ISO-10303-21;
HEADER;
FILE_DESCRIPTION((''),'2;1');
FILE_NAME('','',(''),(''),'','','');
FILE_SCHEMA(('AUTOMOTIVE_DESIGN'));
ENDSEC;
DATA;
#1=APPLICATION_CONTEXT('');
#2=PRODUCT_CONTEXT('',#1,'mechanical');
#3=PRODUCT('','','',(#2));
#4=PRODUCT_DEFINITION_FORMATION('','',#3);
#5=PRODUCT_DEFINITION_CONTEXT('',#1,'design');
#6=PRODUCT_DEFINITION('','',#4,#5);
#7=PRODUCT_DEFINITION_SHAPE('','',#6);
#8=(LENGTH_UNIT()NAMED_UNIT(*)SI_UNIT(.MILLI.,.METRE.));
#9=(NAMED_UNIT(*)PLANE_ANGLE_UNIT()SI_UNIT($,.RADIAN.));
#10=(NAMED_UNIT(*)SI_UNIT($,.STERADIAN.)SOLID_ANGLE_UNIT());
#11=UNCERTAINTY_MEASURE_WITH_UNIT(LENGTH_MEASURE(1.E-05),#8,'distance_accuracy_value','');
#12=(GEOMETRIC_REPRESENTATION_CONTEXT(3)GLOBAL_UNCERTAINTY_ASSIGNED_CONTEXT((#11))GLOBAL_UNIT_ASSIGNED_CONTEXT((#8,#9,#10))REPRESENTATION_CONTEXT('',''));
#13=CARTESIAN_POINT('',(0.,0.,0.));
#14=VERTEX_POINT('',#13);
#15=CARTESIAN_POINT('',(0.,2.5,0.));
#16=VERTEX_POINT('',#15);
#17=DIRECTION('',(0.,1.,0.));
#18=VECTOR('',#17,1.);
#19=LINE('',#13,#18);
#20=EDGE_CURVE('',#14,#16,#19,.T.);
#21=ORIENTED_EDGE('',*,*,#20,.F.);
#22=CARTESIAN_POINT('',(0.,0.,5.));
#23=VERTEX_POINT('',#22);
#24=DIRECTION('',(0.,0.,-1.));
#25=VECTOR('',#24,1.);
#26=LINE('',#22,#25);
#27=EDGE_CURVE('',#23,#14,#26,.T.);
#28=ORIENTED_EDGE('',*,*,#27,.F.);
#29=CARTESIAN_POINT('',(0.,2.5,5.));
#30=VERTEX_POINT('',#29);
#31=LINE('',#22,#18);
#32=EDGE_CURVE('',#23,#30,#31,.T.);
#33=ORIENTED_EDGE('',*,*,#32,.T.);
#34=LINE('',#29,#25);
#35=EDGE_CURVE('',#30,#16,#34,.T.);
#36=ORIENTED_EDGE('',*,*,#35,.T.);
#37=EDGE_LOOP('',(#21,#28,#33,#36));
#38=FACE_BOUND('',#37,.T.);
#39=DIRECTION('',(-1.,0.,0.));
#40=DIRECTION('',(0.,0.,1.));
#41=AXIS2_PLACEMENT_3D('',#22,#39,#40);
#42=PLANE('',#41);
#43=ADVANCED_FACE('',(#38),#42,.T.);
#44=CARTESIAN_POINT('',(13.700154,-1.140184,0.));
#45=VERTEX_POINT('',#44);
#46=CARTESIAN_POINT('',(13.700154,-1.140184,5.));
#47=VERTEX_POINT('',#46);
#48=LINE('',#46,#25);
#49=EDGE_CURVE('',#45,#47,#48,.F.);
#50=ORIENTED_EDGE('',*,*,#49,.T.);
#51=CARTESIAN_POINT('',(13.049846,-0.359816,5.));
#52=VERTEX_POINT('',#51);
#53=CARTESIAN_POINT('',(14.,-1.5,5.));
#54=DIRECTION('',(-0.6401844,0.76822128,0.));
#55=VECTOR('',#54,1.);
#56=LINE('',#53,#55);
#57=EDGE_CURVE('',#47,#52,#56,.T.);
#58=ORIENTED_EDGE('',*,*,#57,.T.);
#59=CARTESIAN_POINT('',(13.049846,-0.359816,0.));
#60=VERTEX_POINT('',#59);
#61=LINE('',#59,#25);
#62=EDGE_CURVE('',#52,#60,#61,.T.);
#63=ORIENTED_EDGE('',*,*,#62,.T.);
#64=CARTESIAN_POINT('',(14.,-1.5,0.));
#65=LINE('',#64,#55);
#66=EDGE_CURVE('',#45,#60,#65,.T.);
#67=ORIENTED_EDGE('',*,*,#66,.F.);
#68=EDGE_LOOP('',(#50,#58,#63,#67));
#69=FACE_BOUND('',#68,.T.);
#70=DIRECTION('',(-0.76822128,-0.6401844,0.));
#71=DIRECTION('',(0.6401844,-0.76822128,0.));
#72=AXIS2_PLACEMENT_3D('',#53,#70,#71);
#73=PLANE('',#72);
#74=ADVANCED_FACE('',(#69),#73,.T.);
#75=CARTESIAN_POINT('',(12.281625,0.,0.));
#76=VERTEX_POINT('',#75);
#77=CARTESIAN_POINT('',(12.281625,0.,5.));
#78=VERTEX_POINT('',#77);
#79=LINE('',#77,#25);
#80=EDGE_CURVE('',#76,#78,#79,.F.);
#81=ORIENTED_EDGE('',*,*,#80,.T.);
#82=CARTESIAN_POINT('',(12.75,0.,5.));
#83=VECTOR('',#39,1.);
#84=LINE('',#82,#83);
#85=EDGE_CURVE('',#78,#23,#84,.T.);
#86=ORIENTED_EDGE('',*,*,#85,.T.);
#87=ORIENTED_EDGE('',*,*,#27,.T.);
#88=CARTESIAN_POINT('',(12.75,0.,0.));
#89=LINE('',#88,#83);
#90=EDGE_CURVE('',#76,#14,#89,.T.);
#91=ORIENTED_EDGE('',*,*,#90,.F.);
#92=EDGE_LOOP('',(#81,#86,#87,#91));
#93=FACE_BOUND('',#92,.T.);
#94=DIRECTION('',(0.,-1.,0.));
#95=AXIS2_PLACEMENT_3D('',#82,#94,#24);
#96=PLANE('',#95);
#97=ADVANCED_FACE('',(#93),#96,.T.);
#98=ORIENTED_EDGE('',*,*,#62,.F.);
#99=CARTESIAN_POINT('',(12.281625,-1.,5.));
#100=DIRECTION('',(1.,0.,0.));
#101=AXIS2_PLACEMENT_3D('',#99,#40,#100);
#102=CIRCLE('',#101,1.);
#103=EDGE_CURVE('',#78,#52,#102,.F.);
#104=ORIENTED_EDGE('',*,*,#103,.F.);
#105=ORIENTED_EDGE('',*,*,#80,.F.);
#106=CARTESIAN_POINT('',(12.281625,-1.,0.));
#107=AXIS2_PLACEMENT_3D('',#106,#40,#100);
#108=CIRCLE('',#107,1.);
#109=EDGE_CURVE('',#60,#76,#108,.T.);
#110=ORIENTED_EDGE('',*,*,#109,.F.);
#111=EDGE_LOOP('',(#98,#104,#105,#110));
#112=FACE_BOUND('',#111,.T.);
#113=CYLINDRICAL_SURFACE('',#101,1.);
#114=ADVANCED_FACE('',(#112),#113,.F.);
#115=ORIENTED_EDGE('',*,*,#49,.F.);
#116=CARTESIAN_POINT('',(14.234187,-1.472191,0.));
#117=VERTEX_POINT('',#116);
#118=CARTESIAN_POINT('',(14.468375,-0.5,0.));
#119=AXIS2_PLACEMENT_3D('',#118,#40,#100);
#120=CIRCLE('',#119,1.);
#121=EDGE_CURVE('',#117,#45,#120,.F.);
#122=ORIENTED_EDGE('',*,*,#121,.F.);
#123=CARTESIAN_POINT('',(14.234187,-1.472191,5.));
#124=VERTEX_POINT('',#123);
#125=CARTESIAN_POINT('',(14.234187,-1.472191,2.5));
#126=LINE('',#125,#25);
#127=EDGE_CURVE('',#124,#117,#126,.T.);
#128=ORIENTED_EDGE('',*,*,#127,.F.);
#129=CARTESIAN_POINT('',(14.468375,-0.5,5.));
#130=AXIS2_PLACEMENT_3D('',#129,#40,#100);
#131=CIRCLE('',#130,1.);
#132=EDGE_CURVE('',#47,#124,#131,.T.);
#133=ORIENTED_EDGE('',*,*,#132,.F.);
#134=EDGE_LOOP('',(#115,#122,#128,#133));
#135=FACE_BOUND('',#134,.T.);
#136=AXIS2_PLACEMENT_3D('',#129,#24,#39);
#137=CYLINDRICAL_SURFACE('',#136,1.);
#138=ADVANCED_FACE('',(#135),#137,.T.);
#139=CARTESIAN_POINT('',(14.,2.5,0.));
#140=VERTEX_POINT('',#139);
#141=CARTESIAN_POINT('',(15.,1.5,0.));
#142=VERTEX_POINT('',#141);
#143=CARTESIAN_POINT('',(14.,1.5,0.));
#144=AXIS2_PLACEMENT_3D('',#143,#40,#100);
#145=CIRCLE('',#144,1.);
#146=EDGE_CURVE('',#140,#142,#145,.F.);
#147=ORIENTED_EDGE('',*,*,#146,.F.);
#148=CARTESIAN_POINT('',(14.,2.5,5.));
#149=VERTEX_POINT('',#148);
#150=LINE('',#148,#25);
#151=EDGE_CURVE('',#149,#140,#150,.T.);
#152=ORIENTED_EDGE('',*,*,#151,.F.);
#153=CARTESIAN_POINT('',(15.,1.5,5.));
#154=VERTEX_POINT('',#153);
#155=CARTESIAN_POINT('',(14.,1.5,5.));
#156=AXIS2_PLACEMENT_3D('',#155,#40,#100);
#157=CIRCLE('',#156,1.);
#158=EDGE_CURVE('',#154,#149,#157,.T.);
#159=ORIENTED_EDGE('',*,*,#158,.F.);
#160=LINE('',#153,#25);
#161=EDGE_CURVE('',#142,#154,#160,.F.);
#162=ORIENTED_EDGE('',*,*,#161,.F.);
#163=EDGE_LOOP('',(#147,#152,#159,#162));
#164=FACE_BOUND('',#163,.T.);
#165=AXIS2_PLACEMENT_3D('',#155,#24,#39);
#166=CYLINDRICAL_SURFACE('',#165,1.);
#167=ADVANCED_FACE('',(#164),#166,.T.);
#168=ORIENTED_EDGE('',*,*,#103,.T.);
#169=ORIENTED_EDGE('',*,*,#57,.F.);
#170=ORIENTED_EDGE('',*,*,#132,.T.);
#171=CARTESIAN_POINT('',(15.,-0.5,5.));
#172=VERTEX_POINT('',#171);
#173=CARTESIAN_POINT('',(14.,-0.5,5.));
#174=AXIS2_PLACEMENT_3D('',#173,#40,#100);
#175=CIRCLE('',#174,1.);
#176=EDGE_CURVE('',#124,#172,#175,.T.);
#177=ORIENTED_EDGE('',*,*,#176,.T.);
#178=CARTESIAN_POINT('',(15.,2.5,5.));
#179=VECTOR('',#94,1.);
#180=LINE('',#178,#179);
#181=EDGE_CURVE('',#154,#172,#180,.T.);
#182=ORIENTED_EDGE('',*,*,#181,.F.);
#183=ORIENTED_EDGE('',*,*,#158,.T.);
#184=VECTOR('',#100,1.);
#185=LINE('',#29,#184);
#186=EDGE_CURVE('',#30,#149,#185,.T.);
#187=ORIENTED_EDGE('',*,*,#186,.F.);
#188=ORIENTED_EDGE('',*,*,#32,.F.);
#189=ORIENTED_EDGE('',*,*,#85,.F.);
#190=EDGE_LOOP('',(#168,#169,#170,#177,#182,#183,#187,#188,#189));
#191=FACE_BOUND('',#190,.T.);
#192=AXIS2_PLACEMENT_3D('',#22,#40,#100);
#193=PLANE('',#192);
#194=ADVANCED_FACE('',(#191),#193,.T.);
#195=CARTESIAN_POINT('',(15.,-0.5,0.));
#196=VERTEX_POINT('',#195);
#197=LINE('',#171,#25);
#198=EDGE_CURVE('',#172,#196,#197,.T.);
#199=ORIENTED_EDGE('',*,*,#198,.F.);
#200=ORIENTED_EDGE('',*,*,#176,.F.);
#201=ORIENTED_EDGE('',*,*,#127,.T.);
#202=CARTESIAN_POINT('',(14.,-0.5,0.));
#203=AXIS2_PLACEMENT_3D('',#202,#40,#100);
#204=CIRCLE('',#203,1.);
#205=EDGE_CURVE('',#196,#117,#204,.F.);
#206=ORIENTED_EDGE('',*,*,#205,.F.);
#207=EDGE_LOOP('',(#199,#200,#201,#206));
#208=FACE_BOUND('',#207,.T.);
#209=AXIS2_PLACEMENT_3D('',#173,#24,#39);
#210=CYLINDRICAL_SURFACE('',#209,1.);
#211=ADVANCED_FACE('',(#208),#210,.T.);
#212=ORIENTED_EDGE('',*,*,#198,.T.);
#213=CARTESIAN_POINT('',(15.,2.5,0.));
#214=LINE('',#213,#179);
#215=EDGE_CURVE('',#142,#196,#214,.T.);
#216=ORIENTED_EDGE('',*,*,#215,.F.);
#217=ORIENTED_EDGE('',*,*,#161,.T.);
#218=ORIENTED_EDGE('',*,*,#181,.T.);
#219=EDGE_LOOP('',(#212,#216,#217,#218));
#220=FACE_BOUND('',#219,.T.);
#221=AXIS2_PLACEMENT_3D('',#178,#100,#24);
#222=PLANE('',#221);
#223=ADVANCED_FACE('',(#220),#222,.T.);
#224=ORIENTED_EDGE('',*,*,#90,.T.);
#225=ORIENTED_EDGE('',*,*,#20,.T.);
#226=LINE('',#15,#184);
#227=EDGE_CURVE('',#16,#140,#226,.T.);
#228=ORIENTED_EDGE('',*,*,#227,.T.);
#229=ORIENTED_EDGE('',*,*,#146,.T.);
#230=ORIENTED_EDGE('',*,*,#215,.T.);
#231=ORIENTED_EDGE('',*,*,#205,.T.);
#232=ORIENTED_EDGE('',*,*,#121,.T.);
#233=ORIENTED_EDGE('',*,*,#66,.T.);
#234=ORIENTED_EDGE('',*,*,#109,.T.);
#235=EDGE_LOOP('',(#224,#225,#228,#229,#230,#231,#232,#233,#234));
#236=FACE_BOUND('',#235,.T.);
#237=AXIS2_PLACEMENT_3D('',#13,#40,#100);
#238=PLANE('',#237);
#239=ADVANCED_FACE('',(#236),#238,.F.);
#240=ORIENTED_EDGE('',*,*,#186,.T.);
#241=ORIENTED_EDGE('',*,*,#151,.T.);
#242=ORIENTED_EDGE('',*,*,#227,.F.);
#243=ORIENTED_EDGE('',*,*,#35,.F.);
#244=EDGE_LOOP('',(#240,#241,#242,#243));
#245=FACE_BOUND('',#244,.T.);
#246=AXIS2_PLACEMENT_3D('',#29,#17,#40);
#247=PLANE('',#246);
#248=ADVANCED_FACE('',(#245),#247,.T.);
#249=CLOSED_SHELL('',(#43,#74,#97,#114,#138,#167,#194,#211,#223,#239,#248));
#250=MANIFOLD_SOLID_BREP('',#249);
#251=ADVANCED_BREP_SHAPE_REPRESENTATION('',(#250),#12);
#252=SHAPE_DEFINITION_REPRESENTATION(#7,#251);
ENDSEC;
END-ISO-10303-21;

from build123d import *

# Parameters (mm, degrees)
BOSS_EXTRUDE1_DEPTH = 5
FILLET1_R           = 1


with BuildPart() as part:
    # Sketch1 → Boss-Extrude1 (new body)
    with BuildSketch(Plane.XY):
        Polygon((0, 2.5), (15, 2.5), (15, -1.5), (14, -1.5), (12.75, 0), (0, 0), align=None)
    extrude(amount=BOSS_EXTRUDE1_DEPTH)

    # Fillet1
    # the kernel refuses this fillet: 1 mm, written as the material it adds along each edge
    with BuildSketch(Plane(origin=(12.75, 0, 0), x_dir=(0.6401843996644788, -0.7682212795973767, 0), z_dir=(0, 0, 1))) as fillet1_piece_1:
        with BuildLine():
            CenterArc((FILLET1_R * 0.468374945984, -FILLET1_R), FILLET1_R, 90, 50.194428908)
            Line((-FILLET1_R * 0.299846333613, -FILLET1_R * 0.359815600336), (0, 0))
            Line((0, 0), (FILLET1_R * 0.468374945984, 0))
        make_face()
    extrude(amount=5)
    # the kernel refuses this fillet: 1 mm, written as the material it takes off along each edge
    with BuildSketch(Plane(origin=(15, 2.5, -2.5), x_dir=(-1, 0, 0), z_dir=(0, 0, 1)), Plane(origin=(15, -1.5, -2.5), x_dir=(0, 1, 0), z_dir=(0, 0, 1))) as fillet1_2_piece_1:
        with BuildLine():
            CenterArc((FILLET1_R, FILLET1_R), FILLET1_R, 180, 90)
            Line((0, FILLET1_R), (0, 0))
            Line((0, 0), (FILLET1_R, 0))
        make_face()
    extrude(amount=10, mode=Mode.SUBTRACT)
    with BuildSketch(Plane(origin=(14, -1.5, -1.170937365), x_dir=(1, 0, 0), z_dir=(0, 0, 1))) as fillet1_2_piece_2:
        with BuildLine():
            CenterArc((FILLET1_R * 0.468374945984, FILLET1_R), FILLET1_R, 219.805571092, 50.194428908)
            Line((-FILLET1_R * 0.299846333613, FILLET1_R * 0.359815600336), (0, 0))
            Line((0, 0), (FILLET1_R * 0.468374945984, 0))
        make_face()
    extrude(amount=7.34187473, mode=Mode.SUBTRACT)


solid = part.part
